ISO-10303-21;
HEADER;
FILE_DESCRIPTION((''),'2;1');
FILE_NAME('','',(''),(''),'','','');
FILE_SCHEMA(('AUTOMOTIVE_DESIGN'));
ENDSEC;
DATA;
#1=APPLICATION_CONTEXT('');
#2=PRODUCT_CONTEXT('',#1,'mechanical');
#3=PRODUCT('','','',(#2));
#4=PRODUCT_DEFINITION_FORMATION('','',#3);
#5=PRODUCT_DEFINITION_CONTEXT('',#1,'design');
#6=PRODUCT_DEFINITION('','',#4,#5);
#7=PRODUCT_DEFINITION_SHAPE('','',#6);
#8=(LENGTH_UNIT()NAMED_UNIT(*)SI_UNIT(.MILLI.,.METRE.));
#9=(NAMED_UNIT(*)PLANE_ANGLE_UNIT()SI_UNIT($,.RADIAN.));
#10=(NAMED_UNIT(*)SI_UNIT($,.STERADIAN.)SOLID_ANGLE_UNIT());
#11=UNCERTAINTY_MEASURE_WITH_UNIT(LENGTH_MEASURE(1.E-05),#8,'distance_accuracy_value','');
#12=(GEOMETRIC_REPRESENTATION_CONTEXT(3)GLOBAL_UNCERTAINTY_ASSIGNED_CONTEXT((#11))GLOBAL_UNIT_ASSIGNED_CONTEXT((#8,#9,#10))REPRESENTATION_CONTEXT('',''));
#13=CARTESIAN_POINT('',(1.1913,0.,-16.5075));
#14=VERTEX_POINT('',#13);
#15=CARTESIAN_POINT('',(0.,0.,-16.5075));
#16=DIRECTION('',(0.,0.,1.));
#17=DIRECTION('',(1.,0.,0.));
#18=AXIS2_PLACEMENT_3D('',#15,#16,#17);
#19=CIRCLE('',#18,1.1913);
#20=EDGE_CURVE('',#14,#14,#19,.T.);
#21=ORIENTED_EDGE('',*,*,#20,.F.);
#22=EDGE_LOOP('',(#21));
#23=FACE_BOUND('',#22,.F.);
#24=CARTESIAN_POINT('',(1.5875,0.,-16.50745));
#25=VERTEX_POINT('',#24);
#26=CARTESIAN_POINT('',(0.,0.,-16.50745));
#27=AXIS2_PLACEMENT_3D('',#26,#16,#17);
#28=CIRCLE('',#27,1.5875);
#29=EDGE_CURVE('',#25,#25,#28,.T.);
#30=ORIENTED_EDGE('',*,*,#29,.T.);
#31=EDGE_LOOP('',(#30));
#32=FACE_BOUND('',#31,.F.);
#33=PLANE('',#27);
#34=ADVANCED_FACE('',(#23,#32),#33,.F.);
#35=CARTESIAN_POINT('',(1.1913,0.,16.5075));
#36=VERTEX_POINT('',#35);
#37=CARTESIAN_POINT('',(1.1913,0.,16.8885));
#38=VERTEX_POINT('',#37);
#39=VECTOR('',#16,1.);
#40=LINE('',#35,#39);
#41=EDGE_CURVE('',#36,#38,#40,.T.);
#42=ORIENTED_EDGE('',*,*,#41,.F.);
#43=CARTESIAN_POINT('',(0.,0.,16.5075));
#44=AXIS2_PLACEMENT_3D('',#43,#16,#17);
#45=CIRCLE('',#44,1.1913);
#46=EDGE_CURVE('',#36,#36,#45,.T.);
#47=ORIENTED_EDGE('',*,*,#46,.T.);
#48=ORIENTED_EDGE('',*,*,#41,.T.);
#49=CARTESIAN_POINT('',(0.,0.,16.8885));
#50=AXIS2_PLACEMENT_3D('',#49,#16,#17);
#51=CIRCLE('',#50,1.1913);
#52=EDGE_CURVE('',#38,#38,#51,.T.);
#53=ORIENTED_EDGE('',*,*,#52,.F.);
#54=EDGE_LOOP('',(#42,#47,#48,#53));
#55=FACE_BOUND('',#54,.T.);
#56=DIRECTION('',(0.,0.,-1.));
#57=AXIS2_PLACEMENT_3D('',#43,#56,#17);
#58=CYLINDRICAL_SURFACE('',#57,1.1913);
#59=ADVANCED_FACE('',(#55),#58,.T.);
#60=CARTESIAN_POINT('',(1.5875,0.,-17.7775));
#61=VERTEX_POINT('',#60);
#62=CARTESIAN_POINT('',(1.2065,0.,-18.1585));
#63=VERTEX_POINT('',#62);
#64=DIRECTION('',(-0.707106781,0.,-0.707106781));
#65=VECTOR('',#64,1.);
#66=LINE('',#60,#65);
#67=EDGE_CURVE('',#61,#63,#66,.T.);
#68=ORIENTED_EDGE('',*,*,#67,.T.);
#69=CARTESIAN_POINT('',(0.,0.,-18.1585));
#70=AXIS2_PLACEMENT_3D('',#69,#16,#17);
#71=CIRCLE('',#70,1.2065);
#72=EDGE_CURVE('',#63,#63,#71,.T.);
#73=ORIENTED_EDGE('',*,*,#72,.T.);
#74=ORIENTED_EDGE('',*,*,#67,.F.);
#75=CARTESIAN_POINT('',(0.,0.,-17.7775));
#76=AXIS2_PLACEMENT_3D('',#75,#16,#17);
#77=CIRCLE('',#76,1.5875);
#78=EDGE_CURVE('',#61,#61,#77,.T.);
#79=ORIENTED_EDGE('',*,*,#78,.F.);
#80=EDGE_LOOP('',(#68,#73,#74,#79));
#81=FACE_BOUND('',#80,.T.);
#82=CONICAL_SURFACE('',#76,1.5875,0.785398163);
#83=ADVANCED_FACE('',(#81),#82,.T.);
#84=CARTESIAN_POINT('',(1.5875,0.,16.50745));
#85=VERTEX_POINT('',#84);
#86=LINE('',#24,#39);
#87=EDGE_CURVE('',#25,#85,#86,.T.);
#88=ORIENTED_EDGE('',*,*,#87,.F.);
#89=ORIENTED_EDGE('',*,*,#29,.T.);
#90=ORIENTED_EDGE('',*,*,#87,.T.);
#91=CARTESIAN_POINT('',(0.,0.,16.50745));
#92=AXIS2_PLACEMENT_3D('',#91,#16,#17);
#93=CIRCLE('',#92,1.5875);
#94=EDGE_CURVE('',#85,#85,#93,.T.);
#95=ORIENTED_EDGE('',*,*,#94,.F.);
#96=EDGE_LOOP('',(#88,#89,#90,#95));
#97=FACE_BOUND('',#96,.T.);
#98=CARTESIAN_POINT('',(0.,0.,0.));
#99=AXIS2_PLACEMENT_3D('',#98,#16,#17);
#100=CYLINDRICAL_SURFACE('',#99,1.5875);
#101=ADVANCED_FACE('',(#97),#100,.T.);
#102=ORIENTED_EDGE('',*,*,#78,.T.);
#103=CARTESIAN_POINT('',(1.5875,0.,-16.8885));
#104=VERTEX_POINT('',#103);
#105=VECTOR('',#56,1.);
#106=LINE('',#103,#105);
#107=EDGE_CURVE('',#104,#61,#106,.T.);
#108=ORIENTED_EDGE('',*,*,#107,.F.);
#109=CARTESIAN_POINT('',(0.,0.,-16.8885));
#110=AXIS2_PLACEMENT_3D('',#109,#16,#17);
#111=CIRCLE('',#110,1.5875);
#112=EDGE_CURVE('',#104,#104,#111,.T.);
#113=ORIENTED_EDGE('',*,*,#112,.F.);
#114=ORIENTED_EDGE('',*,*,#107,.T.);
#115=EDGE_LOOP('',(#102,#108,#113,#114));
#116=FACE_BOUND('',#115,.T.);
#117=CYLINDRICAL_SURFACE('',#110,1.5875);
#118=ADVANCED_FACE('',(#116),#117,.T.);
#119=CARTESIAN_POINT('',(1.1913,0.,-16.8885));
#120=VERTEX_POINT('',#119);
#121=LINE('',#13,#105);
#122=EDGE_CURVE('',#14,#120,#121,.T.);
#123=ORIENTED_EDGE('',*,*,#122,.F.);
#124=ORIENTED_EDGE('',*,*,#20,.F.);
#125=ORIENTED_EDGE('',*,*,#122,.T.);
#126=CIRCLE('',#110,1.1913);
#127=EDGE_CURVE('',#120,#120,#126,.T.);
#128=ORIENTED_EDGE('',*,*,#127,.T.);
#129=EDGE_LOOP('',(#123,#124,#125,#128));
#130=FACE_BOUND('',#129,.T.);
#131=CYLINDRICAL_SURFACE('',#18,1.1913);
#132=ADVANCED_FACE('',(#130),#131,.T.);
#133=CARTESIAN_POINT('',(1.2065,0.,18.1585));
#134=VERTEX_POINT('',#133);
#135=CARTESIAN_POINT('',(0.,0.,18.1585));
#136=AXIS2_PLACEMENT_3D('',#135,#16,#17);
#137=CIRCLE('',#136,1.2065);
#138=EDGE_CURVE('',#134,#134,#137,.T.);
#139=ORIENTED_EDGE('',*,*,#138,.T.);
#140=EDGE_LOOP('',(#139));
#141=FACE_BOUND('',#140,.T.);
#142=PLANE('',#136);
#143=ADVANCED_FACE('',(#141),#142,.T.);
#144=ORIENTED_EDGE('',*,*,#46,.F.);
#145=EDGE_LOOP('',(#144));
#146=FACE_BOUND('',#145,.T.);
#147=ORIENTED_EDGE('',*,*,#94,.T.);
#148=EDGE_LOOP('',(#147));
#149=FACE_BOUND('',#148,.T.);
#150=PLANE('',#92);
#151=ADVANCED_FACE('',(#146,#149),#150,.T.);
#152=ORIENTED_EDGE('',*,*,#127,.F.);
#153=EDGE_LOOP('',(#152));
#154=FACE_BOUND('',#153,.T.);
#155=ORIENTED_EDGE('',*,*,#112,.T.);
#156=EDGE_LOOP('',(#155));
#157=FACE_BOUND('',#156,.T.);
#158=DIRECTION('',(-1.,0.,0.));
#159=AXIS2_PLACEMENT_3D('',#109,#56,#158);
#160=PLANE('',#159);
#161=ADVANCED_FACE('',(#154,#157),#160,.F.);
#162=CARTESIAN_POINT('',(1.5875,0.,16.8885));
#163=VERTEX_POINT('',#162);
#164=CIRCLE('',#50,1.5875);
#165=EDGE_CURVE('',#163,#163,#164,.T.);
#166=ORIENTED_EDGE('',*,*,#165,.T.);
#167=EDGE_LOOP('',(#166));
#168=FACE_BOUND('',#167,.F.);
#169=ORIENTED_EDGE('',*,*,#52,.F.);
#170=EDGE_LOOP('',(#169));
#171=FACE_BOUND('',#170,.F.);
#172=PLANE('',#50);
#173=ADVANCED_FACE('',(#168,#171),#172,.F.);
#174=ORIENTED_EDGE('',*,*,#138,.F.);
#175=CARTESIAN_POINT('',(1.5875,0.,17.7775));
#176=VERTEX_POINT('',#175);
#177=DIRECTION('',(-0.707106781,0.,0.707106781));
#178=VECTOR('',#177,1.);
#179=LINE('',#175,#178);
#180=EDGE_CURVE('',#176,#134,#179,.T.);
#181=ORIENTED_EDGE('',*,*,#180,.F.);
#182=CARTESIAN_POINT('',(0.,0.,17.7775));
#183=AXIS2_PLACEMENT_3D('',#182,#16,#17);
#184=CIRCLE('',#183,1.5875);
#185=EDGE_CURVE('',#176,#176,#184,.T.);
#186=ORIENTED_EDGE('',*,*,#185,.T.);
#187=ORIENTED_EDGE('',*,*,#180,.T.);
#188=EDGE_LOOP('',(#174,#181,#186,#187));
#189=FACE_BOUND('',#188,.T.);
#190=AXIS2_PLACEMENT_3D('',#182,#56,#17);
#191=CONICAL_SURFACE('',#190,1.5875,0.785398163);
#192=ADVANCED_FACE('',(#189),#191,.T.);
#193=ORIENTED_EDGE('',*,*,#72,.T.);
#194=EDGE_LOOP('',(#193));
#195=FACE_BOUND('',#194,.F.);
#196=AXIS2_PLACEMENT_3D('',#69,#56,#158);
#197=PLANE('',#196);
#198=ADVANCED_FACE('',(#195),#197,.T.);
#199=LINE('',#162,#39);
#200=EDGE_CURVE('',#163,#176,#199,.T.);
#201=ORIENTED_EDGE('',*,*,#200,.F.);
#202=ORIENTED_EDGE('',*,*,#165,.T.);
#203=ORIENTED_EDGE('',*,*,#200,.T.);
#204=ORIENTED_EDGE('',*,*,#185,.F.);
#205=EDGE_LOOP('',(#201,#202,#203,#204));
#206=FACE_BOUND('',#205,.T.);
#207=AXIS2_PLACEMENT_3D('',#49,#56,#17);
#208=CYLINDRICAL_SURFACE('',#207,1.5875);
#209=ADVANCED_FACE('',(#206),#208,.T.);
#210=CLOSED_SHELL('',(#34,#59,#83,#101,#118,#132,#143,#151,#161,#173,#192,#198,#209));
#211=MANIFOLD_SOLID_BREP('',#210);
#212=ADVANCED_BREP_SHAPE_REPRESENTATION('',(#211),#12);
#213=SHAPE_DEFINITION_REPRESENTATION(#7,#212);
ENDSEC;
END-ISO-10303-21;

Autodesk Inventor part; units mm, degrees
ref_plane "YZ Plane" through (0, 0, 0) normal (1, 0, 0) x (0, 1, 0)
ref_plane "XZ Plane" through (0, 0, 0) normal (0, 1, 0) x (-1, 0, 0)
ref_plane "XY Plane" through (0, 0, 0) normal (0, 0, 1) x (1, 0, 0)
sketch "Sketch1" plane through (0, 0, 0) normal (0, 0, 1) x (1, 0, 0)
  circle A0 centre (0, 0) radius 1.5875
  dimension "d0" = 3.175
extrude "Extrusion1" add sketch "Sketch1" along normal mid plane 33.0149
sketch "Sketch2" plane through (0, 0, 16.5075) normal (0, 0, 1) x (1, 0, 0)
  circle A0 centre (0, 0) radius 1.1913
  dimension "d3" = 2.3825
extrude "Extrusion2" add sketch "Sketch2" along normal blind 0.381
sketch "Sketch3" plane through (0, 0, 16.8885) normal (0, 0, 1) x (1, 0, 0)
  circle A0 centre (0, 0) radius 1.5875 projected
extrude "Extrusion3" add sketch "Sketch3" along normal blind 1.27
chamfer "Chamfer1" distance 0.381 angle 45 1 edges at (-1.5875, 0, 18.1585)
mirror "Mirror1" about plane through (0, 0, 0) normal (0, 0, 1) of "Extrusion2", "Extrusion3", "Chamfer1"
properties part number "Front Upper Hinge Pin"
